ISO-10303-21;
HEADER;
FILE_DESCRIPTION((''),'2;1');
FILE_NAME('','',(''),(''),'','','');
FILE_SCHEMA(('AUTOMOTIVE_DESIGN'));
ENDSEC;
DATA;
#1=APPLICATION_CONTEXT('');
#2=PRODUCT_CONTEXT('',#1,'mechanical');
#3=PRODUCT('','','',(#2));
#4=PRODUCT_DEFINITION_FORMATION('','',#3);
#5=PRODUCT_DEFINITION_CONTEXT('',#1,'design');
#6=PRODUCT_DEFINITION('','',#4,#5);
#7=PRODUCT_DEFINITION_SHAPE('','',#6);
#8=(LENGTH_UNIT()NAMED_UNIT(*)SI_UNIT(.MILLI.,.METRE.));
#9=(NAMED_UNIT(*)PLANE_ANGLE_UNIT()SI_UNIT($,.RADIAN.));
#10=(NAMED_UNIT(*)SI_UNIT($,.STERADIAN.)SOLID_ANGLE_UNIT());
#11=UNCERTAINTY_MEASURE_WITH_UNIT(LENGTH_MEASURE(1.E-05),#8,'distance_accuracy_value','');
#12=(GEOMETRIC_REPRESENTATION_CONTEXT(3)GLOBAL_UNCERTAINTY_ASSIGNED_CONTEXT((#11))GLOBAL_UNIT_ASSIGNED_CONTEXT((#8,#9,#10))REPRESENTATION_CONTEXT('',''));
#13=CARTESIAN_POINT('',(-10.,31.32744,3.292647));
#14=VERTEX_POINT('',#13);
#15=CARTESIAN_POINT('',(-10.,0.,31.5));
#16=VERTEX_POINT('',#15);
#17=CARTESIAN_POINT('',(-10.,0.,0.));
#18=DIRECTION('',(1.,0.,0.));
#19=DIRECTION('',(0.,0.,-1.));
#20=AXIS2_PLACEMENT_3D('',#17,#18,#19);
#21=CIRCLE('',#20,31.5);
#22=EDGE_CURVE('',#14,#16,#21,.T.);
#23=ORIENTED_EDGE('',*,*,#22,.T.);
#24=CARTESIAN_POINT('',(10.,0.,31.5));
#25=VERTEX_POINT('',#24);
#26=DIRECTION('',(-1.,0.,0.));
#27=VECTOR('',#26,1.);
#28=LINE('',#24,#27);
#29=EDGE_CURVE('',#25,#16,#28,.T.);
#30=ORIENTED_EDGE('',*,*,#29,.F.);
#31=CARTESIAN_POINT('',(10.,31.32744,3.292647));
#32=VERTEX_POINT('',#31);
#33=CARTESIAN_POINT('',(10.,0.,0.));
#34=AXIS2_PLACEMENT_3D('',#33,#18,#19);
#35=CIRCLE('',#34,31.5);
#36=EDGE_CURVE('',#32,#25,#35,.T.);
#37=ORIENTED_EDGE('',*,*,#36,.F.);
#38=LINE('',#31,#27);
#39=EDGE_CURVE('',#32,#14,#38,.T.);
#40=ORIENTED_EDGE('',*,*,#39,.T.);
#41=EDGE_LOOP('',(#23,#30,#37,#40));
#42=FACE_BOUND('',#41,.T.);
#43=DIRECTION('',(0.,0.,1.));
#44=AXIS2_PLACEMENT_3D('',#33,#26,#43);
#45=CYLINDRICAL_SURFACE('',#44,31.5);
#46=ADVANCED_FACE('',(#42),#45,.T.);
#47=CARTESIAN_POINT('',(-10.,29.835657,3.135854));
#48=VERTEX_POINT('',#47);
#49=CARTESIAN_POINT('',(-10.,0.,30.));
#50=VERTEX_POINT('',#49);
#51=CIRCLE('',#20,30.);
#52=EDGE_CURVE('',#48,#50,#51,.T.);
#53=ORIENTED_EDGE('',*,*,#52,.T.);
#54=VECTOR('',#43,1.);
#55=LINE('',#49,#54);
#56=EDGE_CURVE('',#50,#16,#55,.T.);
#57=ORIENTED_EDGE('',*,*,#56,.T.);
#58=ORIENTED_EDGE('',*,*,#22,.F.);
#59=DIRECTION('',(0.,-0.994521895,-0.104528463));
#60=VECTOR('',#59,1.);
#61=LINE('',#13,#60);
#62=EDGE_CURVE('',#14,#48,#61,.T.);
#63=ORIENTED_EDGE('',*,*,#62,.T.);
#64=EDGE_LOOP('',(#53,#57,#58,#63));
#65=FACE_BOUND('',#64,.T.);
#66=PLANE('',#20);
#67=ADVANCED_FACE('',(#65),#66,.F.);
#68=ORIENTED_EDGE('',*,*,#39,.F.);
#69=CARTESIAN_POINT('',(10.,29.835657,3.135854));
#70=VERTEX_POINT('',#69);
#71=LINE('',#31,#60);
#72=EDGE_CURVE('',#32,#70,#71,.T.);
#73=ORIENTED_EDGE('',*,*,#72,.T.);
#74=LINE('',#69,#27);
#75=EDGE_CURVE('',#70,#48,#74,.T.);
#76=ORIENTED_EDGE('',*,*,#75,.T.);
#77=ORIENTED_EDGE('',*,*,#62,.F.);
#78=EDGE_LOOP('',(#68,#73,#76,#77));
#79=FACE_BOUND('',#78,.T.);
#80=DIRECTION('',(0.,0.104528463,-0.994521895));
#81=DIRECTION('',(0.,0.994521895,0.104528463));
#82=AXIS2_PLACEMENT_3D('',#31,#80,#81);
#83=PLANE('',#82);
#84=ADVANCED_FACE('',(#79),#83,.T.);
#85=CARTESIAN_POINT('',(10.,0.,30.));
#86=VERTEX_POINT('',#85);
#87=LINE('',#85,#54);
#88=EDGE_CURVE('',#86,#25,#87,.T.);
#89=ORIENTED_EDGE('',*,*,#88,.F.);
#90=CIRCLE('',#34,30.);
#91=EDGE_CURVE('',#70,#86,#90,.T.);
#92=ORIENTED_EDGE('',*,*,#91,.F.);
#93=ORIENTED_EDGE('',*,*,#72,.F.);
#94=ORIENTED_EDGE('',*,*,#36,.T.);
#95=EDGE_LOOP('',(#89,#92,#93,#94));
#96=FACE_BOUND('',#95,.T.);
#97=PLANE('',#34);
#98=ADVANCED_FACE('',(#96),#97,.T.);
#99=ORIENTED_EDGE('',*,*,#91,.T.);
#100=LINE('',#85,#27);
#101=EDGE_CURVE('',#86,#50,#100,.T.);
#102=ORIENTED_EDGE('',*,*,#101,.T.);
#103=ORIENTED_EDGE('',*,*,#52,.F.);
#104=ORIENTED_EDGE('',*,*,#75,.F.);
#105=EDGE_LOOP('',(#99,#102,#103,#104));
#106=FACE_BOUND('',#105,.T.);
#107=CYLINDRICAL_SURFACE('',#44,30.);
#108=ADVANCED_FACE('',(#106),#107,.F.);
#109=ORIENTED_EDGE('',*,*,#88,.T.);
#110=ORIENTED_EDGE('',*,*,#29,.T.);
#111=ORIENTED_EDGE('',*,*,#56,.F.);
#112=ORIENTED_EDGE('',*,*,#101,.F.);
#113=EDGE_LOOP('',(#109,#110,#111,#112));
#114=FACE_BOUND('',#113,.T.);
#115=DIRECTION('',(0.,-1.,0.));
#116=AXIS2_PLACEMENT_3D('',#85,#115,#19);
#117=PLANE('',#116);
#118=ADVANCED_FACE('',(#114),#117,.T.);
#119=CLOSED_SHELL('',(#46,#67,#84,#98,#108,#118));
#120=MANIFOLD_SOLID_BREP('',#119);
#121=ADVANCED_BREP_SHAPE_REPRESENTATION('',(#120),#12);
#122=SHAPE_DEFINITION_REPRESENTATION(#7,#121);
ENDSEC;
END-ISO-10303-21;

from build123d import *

# Parameters (mm, degrees)
SM_BASE_FLANGE_1_DEPTH = 10


# Sheet-metal steps are written as plain solids
with BuildPart() as part:
    # Sketch 1 → Базовая кромка1 (new, symmetric)
    with BuildSketch(Plane(origin=(0, 0, 0), x_dir=(0, 0, -1), z_dir=(1, 0, 0))):
        with BuildLine():
            ThreePointArc((-3.292646593, 31.327439704), (-23.409062003, 21.0776141), (-31.5, 0))
            Line((-31.5, 0), (-30, 0))
            ThreePointArc((-30, 0), (-22.294344764, 20.073918191), (-3.135853898, 29.835656861))
            Line((-3.135853898, 29.835656861), (-3.292646593, 31.327439704))
        make_face()
    extrude(amount=SM_BASE_FLANGE_1_DEPTH, both=True)


solid = part.part
